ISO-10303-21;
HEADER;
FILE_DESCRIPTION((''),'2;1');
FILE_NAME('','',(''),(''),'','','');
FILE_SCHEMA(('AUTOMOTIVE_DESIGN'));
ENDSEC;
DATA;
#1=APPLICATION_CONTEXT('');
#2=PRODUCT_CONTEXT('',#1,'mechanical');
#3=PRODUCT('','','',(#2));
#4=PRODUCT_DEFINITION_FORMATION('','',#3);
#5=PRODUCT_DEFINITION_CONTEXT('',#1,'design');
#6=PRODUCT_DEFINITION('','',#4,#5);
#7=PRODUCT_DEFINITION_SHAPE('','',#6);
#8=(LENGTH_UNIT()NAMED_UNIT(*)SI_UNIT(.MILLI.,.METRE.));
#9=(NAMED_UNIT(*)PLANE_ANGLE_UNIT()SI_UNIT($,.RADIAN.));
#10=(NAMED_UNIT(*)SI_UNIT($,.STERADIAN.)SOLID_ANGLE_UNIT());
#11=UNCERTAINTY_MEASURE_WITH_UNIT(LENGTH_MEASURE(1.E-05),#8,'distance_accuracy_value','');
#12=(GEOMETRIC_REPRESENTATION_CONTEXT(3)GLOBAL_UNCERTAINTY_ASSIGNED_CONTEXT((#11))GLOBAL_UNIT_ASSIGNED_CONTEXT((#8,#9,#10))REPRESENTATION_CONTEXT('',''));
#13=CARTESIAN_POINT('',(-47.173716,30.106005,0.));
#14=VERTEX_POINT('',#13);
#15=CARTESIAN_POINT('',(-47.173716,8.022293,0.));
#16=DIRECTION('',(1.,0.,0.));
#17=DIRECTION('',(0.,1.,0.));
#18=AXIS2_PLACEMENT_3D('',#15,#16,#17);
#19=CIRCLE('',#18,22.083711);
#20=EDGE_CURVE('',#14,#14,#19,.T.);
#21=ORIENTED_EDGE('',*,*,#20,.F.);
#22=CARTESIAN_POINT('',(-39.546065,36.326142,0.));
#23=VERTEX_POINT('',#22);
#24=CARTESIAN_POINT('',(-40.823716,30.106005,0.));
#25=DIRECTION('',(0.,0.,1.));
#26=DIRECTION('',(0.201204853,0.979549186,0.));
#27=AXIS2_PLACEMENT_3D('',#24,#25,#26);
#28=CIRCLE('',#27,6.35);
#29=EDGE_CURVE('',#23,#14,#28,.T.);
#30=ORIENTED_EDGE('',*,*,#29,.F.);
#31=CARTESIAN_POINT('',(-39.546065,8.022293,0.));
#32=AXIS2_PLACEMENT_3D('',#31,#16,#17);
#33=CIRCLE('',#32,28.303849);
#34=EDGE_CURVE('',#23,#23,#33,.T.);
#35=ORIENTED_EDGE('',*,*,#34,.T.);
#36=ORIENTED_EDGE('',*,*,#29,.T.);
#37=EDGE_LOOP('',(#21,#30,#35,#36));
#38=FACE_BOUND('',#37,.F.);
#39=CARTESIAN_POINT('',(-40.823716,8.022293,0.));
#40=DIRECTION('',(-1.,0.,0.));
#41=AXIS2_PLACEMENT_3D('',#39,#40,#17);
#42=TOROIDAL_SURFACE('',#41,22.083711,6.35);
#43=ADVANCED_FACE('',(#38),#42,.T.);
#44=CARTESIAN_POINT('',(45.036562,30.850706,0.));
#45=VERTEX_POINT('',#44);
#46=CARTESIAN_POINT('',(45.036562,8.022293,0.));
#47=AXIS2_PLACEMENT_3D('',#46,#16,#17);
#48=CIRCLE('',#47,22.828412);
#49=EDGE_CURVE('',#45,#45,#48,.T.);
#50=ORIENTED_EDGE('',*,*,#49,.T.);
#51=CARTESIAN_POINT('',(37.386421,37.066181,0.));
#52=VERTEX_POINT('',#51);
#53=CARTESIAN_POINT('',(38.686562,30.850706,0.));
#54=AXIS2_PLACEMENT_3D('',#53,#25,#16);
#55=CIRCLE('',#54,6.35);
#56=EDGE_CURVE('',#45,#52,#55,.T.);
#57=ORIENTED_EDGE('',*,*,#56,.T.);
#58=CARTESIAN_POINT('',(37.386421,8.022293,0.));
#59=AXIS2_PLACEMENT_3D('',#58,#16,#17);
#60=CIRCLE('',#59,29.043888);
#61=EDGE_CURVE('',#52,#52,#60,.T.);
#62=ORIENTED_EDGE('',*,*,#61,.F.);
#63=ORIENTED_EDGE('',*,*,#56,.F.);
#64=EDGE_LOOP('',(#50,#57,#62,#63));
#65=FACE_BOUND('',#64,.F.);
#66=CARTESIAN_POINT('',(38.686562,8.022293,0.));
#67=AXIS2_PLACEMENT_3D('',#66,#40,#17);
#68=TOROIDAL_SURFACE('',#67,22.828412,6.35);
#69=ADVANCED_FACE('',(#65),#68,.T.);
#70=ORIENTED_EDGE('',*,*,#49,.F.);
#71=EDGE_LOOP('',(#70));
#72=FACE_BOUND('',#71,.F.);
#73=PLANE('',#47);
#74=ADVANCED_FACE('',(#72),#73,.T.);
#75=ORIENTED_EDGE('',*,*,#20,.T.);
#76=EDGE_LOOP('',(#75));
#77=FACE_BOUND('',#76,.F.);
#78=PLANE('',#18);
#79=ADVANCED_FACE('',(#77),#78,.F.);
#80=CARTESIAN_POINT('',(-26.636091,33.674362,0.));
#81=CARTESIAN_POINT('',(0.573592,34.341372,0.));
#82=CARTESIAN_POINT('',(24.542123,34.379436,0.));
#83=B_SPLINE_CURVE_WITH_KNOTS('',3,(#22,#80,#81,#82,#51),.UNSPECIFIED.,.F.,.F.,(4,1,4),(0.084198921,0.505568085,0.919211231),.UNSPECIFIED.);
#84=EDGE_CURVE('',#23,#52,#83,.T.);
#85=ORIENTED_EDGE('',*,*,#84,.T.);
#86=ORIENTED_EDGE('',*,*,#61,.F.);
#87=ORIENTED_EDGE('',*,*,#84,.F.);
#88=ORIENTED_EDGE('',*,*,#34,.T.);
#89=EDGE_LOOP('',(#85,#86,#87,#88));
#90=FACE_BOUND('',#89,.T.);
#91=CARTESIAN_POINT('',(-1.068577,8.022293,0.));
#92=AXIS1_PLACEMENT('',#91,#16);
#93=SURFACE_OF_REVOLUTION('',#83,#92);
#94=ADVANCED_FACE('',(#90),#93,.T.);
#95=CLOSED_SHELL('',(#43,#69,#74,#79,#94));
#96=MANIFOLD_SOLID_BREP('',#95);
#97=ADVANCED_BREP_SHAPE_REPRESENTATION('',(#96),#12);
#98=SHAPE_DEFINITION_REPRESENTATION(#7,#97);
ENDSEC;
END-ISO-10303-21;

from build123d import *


with BuildPart() as f1:
    # F0 (on Top) → F1 (revolve)
    with BuildSketch(Plane.XY):
        with BuildLine():
            add(Edge.make_bspline(
                [(-39.5460653094, 36.326142192), (-26.6360909109, 33.6743616146), (0.573592198, 34.3413720973), (24.5421229151, 34.3794363135), (37.3864209129, 37.0661812385)],
                knots=[0.084198921, 0.084198921, 0.084198921, 0.084198921, 0.5055680854, 0.9192112313, 0.9192112313, 0.9192112313, 0.9192112313], degree=3))
            ThreePointArc((-39.5460653094, 36.326142192), (-44.8367833652, 35.0271623847), (-47.1737161279, 30.1060048635))
            Line((-47.1737161279, 30.1060048635), (-47.1737161279, 8.0222934484))
            Line((-47.1737161279, 8.0222934484), (45.0365617871, 8.0222934484))
            Line((45.0365617871, 8.0222934484), (45.0365617871, 30.8507058981))
            ThreePointArc((45.0365617871, 30.8507058981), (42.6907224638, 35.7791130724), (37.3864209129, 37.0661812385))
        make_face()
    revolve(axis=Axis((-1.0685771704, 8.0222934484, 0), (1, 0, 0)))


solid = f1.part
